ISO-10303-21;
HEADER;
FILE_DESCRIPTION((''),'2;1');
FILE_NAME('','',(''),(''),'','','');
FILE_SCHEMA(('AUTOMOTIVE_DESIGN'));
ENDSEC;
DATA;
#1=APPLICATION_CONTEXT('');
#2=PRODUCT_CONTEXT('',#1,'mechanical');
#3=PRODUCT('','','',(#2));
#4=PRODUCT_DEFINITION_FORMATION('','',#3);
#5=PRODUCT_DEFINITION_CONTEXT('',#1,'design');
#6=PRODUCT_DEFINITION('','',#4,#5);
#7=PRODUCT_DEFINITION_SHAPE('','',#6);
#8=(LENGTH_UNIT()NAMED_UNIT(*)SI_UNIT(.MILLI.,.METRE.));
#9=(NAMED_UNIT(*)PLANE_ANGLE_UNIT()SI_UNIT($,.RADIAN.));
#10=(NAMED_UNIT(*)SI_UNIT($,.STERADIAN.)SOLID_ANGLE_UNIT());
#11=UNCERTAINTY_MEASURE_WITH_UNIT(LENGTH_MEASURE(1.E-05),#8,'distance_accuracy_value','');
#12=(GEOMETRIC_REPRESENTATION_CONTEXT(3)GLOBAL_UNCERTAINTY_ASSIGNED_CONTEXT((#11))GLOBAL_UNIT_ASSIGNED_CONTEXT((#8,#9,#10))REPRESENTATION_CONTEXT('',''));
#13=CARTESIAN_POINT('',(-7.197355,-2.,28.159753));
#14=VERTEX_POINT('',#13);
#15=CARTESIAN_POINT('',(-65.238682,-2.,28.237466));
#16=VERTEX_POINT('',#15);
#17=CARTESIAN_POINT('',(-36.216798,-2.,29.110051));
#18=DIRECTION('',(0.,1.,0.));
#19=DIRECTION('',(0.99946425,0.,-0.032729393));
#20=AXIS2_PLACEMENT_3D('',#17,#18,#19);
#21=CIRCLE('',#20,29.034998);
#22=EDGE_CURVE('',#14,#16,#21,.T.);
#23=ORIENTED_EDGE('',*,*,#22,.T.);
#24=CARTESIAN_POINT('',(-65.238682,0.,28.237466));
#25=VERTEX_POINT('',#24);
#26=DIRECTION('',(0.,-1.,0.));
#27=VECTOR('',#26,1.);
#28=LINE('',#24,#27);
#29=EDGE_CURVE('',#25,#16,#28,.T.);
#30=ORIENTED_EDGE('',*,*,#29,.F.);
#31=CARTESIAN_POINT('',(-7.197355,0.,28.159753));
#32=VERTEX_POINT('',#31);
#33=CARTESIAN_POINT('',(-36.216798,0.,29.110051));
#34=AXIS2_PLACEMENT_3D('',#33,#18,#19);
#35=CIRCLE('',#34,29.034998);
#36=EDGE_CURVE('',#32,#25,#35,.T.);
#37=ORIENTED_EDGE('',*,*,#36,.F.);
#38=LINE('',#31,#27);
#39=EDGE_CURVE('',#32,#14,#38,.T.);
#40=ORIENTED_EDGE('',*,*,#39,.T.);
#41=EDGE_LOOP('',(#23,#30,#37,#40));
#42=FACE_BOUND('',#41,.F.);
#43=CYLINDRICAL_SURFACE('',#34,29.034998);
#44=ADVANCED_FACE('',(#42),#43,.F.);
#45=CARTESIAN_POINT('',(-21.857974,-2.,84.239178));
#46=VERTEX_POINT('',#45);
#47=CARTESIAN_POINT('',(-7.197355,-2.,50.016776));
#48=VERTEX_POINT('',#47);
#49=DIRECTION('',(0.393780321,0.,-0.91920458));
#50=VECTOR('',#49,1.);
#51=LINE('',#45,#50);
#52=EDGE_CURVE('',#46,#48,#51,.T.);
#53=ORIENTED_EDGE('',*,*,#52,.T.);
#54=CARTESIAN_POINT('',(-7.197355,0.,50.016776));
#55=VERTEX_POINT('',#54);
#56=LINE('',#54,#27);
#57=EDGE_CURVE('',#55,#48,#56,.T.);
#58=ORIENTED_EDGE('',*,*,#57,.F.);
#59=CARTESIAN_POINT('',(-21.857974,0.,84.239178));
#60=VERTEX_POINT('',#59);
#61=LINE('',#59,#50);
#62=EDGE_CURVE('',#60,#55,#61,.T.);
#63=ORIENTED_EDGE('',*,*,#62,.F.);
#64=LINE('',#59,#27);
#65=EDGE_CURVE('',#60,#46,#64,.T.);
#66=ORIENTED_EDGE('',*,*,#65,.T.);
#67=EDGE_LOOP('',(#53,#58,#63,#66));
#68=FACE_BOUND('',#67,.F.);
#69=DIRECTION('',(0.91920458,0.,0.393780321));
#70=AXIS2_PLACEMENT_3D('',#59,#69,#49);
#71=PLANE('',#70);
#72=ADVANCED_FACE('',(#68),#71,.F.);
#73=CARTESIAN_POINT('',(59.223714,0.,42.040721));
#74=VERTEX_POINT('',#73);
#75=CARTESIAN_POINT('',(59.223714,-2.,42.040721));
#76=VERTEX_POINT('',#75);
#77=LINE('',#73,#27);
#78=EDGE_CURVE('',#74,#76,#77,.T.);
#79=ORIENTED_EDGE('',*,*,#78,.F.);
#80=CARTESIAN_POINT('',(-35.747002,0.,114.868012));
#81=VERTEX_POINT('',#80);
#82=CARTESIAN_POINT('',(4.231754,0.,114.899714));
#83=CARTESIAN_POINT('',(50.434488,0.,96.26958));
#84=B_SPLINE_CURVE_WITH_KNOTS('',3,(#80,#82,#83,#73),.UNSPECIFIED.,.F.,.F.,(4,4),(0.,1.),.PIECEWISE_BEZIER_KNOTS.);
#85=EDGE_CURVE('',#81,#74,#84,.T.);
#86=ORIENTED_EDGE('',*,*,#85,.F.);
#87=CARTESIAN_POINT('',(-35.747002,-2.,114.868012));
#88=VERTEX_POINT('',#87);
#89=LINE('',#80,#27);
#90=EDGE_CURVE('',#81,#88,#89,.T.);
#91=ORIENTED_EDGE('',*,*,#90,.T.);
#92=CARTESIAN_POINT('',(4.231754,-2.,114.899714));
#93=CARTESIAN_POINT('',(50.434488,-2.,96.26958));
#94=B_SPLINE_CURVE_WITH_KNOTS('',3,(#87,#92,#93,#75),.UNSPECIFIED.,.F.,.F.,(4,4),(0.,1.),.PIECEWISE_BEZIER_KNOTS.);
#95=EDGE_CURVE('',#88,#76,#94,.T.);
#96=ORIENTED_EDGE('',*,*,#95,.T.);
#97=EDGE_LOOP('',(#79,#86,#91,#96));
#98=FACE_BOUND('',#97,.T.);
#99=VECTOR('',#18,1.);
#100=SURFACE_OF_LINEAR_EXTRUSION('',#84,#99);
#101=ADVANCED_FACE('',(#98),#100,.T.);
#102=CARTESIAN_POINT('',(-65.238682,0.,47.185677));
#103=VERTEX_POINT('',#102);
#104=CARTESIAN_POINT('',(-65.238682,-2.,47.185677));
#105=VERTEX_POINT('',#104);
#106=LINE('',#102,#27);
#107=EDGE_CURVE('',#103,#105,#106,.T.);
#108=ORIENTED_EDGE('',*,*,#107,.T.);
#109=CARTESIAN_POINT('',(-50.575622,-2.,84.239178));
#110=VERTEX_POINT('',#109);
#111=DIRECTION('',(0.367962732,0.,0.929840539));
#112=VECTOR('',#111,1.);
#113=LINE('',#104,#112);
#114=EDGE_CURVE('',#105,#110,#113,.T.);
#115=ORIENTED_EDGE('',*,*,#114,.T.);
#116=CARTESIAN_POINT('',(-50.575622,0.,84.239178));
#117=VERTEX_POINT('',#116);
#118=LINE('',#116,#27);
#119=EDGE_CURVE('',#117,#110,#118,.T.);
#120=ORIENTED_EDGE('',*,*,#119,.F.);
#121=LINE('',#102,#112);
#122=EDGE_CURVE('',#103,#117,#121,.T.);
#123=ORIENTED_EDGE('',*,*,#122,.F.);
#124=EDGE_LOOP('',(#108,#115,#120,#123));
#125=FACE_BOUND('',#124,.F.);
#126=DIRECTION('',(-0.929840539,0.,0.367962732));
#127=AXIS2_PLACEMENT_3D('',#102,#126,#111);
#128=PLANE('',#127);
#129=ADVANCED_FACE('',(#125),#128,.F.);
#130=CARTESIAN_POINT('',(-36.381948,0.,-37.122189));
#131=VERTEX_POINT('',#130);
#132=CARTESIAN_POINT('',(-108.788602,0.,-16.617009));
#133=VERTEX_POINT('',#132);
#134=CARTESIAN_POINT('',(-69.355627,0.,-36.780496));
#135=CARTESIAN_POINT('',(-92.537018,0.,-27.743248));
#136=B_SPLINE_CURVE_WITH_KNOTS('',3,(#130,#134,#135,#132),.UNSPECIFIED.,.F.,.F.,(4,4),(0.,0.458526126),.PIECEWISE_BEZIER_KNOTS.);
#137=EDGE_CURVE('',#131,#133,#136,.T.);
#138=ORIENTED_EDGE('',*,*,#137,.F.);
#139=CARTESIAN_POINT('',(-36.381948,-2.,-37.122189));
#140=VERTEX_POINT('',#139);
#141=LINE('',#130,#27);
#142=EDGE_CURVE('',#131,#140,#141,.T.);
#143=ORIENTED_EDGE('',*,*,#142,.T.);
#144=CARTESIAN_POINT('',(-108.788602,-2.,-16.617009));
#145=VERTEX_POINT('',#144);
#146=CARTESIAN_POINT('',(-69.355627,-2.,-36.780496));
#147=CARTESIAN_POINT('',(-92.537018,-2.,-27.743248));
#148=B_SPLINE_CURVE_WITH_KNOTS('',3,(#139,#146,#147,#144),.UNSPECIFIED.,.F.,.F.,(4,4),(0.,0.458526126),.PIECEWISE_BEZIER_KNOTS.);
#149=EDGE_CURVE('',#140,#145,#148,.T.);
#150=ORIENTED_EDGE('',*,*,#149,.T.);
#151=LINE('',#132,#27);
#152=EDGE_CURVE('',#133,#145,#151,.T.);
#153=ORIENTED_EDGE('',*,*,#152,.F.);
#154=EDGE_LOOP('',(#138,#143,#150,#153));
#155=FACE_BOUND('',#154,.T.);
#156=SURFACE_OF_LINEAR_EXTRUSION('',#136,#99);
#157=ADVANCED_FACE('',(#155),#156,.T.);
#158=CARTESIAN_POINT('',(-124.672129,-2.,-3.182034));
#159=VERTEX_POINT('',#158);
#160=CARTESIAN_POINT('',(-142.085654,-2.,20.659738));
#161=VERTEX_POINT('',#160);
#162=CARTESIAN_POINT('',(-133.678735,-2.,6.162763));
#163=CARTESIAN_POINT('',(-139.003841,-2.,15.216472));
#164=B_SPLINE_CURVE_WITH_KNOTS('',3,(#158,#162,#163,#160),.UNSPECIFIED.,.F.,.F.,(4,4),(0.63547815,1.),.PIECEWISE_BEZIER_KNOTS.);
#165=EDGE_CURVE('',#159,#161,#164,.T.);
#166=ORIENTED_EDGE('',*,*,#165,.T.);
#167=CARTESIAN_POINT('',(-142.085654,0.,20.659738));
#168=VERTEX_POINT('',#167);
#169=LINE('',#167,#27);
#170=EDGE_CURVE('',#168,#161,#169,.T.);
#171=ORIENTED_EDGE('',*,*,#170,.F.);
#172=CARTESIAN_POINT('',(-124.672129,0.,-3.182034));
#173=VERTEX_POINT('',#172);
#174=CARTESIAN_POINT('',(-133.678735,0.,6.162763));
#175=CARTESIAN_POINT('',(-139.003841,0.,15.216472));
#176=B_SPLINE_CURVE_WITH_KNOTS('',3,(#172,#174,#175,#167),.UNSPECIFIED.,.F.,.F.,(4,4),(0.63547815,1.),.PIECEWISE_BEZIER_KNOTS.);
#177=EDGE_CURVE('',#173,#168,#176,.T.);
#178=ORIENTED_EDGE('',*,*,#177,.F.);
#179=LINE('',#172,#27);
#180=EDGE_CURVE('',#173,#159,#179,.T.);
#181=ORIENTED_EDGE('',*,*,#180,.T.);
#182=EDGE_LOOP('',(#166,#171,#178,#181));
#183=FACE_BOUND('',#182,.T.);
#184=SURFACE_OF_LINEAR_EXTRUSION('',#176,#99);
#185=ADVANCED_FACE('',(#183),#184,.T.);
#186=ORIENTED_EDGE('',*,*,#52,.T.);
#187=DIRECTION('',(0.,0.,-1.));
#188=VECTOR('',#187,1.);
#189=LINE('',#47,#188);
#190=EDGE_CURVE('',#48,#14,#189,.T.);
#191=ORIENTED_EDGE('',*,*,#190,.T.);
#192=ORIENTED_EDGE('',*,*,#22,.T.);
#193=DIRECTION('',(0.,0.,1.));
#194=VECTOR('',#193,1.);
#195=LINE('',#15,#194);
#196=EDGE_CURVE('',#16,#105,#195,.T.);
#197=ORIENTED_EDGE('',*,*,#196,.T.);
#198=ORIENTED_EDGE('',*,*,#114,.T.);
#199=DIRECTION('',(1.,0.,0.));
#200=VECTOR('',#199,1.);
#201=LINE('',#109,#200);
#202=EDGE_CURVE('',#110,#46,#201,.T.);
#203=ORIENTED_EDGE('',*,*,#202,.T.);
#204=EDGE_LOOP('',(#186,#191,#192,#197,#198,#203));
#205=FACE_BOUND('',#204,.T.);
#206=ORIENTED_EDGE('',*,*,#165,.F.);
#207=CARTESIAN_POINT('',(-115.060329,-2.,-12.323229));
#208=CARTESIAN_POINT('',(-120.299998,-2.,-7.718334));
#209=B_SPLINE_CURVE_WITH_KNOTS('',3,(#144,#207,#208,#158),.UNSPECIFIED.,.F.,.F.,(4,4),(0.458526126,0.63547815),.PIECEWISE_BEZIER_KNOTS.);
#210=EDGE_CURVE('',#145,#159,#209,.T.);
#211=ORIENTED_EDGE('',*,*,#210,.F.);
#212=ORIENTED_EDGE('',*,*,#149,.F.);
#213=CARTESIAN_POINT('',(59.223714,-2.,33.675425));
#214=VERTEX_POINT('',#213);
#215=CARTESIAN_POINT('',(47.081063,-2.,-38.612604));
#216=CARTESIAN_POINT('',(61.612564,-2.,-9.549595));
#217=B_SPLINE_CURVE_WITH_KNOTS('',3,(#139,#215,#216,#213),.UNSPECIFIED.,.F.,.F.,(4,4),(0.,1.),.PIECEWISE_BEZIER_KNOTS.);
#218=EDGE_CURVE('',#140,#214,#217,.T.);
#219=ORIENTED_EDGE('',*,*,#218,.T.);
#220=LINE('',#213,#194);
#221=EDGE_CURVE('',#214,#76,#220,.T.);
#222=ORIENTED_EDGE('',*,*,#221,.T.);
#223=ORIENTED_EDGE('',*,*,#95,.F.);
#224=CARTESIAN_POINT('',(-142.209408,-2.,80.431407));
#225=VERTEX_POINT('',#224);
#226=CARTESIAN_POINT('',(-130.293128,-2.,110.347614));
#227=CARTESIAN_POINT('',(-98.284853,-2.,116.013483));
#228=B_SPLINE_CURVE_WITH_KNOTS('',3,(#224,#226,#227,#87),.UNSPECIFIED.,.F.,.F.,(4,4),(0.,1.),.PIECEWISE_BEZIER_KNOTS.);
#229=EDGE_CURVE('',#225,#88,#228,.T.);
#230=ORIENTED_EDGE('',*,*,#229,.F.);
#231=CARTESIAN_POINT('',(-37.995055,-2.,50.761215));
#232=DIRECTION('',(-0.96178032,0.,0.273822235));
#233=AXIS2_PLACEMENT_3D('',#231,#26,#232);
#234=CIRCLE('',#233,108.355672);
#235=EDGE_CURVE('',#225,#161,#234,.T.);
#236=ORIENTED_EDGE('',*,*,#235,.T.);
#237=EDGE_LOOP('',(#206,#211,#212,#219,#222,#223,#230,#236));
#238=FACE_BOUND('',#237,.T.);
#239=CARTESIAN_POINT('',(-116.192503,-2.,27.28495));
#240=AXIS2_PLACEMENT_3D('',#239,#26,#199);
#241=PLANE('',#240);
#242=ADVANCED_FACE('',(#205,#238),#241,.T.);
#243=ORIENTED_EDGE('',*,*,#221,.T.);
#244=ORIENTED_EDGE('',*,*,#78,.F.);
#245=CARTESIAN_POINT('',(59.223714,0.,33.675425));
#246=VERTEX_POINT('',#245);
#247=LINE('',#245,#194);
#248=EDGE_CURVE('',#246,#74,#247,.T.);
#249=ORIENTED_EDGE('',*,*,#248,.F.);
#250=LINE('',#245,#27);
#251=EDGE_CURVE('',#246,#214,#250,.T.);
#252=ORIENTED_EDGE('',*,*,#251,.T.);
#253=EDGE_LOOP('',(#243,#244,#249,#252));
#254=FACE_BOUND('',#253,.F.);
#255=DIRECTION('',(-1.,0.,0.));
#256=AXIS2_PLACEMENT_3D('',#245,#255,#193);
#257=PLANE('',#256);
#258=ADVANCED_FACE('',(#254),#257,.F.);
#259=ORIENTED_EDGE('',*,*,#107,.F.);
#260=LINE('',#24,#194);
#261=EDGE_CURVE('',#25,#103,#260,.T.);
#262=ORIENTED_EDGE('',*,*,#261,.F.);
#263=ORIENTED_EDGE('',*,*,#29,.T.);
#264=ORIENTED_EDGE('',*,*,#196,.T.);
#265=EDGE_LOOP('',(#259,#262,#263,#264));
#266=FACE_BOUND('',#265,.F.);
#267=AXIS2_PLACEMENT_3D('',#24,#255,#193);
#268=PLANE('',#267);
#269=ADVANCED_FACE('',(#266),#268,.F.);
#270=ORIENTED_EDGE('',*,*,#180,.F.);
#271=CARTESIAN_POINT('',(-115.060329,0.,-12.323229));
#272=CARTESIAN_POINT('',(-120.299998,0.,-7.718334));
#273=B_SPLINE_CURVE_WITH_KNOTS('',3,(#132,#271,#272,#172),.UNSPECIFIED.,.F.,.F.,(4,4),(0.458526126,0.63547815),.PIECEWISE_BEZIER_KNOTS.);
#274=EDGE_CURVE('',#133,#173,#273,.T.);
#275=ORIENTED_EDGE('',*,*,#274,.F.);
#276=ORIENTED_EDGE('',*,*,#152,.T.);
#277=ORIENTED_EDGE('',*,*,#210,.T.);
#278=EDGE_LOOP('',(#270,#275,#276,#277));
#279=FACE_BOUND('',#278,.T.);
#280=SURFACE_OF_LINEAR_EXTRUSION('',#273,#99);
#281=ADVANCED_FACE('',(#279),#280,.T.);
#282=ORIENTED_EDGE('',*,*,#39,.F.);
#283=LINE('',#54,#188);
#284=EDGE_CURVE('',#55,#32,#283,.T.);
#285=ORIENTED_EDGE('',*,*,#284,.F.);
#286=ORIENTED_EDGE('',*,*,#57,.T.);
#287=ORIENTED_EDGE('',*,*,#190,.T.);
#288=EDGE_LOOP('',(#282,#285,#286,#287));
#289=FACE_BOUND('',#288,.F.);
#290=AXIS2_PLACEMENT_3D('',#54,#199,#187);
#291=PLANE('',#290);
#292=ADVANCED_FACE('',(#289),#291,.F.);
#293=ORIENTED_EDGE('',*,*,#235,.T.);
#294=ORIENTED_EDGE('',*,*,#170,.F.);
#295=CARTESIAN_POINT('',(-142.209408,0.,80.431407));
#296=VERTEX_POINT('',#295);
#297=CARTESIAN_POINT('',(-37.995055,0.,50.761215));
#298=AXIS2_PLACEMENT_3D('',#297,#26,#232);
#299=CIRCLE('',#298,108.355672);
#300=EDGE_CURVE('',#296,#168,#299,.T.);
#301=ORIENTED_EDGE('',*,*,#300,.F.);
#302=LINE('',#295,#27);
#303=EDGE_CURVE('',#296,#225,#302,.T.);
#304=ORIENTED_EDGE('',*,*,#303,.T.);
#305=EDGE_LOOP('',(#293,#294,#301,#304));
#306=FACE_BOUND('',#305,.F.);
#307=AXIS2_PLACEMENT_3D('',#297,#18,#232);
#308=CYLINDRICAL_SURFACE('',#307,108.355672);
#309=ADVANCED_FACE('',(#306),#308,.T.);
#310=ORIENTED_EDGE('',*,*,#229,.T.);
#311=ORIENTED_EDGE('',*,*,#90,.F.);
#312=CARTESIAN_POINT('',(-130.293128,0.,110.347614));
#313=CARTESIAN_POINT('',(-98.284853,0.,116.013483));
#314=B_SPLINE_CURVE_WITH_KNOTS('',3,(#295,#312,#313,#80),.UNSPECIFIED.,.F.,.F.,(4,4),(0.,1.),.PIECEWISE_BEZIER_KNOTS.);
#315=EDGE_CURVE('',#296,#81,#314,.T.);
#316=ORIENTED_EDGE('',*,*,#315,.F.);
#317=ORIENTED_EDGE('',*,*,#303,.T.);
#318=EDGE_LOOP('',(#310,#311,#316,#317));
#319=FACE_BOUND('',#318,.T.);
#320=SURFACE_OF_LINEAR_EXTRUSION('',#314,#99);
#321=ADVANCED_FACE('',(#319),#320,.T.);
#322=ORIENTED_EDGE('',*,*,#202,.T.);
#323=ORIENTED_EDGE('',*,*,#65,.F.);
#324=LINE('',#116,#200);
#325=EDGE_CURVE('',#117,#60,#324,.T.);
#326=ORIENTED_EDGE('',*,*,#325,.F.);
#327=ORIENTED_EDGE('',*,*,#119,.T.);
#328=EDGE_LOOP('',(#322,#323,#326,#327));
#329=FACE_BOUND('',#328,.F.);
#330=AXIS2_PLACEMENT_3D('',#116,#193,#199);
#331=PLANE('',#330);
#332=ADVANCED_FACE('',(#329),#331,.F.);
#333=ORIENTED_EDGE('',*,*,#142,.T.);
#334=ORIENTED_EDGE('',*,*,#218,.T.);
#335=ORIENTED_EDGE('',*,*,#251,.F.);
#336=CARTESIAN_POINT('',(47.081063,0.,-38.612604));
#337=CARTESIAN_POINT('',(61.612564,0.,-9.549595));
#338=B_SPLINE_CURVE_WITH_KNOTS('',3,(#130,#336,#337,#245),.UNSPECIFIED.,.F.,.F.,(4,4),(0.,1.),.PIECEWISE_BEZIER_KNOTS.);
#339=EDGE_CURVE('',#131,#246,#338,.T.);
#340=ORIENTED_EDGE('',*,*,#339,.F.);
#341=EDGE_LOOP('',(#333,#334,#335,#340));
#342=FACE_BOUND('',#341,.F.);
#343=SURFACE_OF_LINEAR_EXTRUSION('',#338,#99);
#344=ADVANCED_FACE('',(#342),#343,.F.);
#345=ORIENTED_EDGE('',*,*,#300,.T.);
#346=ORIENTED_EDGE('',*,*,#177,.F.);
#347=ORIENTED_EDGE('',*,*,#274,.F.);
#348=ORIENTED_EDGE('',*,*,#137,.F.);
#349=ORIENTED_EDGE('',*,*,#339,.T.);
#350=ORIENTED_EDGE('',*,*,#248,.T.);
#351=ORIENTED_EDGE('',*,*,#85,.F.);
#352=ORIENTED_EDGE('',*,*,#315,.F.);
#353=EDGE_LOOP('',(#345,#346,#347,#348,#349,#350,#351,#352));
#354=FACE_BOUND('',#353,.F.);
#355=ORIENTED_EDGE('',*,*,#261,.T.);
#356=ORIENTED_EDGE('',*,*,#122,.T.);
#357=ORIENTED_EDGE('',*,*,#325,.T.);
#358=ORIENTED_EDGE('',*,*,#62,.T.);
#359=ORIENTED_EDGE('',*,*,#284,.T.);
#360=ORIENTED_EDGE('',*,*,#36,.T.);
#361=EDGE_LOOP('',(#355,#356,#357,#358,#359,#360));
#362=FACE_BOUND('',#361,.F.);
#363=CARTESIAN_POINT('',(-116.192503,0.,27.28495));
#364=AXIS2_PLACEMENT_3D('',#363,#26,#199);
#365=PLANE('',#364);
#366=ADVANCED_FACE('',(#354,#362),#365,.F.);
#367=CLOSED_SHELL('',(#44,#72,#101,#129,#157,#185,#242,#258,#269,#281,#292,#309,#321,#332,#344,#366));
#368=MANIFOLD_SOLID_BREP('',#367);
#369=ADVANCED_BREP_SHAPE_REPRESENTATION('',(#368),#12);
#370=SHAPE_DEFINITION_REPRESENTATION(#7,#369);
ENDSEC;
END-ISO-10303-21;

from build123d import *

# Parameters (mm, degrees)
F1_DEPTH = 2


with BuildPart() as f1:
    # F0 (on Front) → F1 (new body)
    with BuildSketch(Plane.XZ):
        with BuildLine():
            Line((-124.6721289065, 66.9943112569), (-124.6721289065, -3.1820335149))
            add(Edge.make_bspline(
                [(-108.7886020541, -16.6170091142), (-115.0603290285, -12.3232285742), (-120.2999981868, -7.7183339998), (-124.6721289065, -3.1820335149)],
                knots=[0.4585261262, 0.4585261262, 0.4585261262, 0.4585261262, 0.6354781501, 0.6354781501, 0.6354781501, 0.6354781501], degree=3))
            Line((-108.7886020541, -16.6170091142), (-108.7886020541, 66.9943112569))
            Line((-108.7886020541, 66.9943112569), (-124.6721289065, 66.9943112569))
        make_face()
        with BuildLine():
            add(Edge.make_bspline(
                [(-142.2094079373, 80.4314068878), (-130.2931281445, 110.3476141939), (-98.2848527548, 116.0134827146), (-35.7470019427, 114.8680118272)],
                knots=[0, 0, 0, 0, 1, 1, 1, 1], degree=3))
            ThreePointArc((-142.2094079373, 80.4314068878), (-146.3504948166, 50.5368703201), (-142.0856537936, 20.6597377906))
            add(Edge.make_bspline(
                [(-124.6721289065, -3.1820335149), (-133.6787350082, 6.1627629347), (-139.0038412424, 15.2164724191), (-142.0856537936, 20.6597377906)],
                knots=[0.6354781501, 0.6354781501, 0.6354781501, 0.6354781501, 1, 1, 1, 1], degree=3))
            Line((-124.6721289065, -3.1820335149), (-124.6721289065, 66.9943112569))
            Line((-124.6721289065, 66.9943112569), (-108.7886020541, 66.9943112569))
            Line((-108.7886020541, 66.9943112569), (-108.7886020541, -16.6170091142))
            add(Edge.make_bspline(
                [(-36.381947872, -37.122189497), (-69.3556272485, -36.7804960017), (-92.5370180869, -27.743248389), (-108.7886020541, -16.6170091142)],
                knots=[0, 0, 0, 0, 0.4585261262, 0.4585261262, 0.4585261262, 0.4585261262], degree=3))
            add(Edge.make_bspline(
                [(-36.381947872, -37.122189497), (47.0810634374, -38.6126036396), (61.6125640752, -9.5495949141), (59.2237142208, 33.6754252563)],
                knots=[0, 0, 0, 0, 1, 1, 1, 1], degree=3))
            Line((59.2237142208, 33.6754252563), (59.2237142208, 42.0407210837))
            add(Edge.make_bspline(
                [(-35.7470019427, 114.8680118272), (4.2317536953, 114.8997140476), (50.434487808, 96.2695801058), (59.2237142208, 42.0407210837)],
                knots=[0, 0, 0, 0, 1, 1, 1, 1], degree=3))
        make_face()
        with BuildLine():
            Line((-65.2386816857, 47.185676674), (-50.5756217741, 84.2391779074))
            Line((-50.5756217741, 84.2391779074), (-21.8579741833, 84.2391779074))
            Line((-21.8579741833, 84.2391779074), (-7.197354984, 50.0167762288))
            Line((-7.197354984, 50.0167762288), (-7.197354984, 28.1597529901))
            ThreePointArc((-7.197354984, 28.1597529901), (-36.2556737781, 0.0750783929), (-65.2386816857, 28.237466271))
            Line((-65.2386816857, 28.237466271), (-65.2386816857, 47.185676674))
        make_face(mode=Mode.SUBTRACT)
    extrude(amount=F1_DEPTH)


solid = f1.part
